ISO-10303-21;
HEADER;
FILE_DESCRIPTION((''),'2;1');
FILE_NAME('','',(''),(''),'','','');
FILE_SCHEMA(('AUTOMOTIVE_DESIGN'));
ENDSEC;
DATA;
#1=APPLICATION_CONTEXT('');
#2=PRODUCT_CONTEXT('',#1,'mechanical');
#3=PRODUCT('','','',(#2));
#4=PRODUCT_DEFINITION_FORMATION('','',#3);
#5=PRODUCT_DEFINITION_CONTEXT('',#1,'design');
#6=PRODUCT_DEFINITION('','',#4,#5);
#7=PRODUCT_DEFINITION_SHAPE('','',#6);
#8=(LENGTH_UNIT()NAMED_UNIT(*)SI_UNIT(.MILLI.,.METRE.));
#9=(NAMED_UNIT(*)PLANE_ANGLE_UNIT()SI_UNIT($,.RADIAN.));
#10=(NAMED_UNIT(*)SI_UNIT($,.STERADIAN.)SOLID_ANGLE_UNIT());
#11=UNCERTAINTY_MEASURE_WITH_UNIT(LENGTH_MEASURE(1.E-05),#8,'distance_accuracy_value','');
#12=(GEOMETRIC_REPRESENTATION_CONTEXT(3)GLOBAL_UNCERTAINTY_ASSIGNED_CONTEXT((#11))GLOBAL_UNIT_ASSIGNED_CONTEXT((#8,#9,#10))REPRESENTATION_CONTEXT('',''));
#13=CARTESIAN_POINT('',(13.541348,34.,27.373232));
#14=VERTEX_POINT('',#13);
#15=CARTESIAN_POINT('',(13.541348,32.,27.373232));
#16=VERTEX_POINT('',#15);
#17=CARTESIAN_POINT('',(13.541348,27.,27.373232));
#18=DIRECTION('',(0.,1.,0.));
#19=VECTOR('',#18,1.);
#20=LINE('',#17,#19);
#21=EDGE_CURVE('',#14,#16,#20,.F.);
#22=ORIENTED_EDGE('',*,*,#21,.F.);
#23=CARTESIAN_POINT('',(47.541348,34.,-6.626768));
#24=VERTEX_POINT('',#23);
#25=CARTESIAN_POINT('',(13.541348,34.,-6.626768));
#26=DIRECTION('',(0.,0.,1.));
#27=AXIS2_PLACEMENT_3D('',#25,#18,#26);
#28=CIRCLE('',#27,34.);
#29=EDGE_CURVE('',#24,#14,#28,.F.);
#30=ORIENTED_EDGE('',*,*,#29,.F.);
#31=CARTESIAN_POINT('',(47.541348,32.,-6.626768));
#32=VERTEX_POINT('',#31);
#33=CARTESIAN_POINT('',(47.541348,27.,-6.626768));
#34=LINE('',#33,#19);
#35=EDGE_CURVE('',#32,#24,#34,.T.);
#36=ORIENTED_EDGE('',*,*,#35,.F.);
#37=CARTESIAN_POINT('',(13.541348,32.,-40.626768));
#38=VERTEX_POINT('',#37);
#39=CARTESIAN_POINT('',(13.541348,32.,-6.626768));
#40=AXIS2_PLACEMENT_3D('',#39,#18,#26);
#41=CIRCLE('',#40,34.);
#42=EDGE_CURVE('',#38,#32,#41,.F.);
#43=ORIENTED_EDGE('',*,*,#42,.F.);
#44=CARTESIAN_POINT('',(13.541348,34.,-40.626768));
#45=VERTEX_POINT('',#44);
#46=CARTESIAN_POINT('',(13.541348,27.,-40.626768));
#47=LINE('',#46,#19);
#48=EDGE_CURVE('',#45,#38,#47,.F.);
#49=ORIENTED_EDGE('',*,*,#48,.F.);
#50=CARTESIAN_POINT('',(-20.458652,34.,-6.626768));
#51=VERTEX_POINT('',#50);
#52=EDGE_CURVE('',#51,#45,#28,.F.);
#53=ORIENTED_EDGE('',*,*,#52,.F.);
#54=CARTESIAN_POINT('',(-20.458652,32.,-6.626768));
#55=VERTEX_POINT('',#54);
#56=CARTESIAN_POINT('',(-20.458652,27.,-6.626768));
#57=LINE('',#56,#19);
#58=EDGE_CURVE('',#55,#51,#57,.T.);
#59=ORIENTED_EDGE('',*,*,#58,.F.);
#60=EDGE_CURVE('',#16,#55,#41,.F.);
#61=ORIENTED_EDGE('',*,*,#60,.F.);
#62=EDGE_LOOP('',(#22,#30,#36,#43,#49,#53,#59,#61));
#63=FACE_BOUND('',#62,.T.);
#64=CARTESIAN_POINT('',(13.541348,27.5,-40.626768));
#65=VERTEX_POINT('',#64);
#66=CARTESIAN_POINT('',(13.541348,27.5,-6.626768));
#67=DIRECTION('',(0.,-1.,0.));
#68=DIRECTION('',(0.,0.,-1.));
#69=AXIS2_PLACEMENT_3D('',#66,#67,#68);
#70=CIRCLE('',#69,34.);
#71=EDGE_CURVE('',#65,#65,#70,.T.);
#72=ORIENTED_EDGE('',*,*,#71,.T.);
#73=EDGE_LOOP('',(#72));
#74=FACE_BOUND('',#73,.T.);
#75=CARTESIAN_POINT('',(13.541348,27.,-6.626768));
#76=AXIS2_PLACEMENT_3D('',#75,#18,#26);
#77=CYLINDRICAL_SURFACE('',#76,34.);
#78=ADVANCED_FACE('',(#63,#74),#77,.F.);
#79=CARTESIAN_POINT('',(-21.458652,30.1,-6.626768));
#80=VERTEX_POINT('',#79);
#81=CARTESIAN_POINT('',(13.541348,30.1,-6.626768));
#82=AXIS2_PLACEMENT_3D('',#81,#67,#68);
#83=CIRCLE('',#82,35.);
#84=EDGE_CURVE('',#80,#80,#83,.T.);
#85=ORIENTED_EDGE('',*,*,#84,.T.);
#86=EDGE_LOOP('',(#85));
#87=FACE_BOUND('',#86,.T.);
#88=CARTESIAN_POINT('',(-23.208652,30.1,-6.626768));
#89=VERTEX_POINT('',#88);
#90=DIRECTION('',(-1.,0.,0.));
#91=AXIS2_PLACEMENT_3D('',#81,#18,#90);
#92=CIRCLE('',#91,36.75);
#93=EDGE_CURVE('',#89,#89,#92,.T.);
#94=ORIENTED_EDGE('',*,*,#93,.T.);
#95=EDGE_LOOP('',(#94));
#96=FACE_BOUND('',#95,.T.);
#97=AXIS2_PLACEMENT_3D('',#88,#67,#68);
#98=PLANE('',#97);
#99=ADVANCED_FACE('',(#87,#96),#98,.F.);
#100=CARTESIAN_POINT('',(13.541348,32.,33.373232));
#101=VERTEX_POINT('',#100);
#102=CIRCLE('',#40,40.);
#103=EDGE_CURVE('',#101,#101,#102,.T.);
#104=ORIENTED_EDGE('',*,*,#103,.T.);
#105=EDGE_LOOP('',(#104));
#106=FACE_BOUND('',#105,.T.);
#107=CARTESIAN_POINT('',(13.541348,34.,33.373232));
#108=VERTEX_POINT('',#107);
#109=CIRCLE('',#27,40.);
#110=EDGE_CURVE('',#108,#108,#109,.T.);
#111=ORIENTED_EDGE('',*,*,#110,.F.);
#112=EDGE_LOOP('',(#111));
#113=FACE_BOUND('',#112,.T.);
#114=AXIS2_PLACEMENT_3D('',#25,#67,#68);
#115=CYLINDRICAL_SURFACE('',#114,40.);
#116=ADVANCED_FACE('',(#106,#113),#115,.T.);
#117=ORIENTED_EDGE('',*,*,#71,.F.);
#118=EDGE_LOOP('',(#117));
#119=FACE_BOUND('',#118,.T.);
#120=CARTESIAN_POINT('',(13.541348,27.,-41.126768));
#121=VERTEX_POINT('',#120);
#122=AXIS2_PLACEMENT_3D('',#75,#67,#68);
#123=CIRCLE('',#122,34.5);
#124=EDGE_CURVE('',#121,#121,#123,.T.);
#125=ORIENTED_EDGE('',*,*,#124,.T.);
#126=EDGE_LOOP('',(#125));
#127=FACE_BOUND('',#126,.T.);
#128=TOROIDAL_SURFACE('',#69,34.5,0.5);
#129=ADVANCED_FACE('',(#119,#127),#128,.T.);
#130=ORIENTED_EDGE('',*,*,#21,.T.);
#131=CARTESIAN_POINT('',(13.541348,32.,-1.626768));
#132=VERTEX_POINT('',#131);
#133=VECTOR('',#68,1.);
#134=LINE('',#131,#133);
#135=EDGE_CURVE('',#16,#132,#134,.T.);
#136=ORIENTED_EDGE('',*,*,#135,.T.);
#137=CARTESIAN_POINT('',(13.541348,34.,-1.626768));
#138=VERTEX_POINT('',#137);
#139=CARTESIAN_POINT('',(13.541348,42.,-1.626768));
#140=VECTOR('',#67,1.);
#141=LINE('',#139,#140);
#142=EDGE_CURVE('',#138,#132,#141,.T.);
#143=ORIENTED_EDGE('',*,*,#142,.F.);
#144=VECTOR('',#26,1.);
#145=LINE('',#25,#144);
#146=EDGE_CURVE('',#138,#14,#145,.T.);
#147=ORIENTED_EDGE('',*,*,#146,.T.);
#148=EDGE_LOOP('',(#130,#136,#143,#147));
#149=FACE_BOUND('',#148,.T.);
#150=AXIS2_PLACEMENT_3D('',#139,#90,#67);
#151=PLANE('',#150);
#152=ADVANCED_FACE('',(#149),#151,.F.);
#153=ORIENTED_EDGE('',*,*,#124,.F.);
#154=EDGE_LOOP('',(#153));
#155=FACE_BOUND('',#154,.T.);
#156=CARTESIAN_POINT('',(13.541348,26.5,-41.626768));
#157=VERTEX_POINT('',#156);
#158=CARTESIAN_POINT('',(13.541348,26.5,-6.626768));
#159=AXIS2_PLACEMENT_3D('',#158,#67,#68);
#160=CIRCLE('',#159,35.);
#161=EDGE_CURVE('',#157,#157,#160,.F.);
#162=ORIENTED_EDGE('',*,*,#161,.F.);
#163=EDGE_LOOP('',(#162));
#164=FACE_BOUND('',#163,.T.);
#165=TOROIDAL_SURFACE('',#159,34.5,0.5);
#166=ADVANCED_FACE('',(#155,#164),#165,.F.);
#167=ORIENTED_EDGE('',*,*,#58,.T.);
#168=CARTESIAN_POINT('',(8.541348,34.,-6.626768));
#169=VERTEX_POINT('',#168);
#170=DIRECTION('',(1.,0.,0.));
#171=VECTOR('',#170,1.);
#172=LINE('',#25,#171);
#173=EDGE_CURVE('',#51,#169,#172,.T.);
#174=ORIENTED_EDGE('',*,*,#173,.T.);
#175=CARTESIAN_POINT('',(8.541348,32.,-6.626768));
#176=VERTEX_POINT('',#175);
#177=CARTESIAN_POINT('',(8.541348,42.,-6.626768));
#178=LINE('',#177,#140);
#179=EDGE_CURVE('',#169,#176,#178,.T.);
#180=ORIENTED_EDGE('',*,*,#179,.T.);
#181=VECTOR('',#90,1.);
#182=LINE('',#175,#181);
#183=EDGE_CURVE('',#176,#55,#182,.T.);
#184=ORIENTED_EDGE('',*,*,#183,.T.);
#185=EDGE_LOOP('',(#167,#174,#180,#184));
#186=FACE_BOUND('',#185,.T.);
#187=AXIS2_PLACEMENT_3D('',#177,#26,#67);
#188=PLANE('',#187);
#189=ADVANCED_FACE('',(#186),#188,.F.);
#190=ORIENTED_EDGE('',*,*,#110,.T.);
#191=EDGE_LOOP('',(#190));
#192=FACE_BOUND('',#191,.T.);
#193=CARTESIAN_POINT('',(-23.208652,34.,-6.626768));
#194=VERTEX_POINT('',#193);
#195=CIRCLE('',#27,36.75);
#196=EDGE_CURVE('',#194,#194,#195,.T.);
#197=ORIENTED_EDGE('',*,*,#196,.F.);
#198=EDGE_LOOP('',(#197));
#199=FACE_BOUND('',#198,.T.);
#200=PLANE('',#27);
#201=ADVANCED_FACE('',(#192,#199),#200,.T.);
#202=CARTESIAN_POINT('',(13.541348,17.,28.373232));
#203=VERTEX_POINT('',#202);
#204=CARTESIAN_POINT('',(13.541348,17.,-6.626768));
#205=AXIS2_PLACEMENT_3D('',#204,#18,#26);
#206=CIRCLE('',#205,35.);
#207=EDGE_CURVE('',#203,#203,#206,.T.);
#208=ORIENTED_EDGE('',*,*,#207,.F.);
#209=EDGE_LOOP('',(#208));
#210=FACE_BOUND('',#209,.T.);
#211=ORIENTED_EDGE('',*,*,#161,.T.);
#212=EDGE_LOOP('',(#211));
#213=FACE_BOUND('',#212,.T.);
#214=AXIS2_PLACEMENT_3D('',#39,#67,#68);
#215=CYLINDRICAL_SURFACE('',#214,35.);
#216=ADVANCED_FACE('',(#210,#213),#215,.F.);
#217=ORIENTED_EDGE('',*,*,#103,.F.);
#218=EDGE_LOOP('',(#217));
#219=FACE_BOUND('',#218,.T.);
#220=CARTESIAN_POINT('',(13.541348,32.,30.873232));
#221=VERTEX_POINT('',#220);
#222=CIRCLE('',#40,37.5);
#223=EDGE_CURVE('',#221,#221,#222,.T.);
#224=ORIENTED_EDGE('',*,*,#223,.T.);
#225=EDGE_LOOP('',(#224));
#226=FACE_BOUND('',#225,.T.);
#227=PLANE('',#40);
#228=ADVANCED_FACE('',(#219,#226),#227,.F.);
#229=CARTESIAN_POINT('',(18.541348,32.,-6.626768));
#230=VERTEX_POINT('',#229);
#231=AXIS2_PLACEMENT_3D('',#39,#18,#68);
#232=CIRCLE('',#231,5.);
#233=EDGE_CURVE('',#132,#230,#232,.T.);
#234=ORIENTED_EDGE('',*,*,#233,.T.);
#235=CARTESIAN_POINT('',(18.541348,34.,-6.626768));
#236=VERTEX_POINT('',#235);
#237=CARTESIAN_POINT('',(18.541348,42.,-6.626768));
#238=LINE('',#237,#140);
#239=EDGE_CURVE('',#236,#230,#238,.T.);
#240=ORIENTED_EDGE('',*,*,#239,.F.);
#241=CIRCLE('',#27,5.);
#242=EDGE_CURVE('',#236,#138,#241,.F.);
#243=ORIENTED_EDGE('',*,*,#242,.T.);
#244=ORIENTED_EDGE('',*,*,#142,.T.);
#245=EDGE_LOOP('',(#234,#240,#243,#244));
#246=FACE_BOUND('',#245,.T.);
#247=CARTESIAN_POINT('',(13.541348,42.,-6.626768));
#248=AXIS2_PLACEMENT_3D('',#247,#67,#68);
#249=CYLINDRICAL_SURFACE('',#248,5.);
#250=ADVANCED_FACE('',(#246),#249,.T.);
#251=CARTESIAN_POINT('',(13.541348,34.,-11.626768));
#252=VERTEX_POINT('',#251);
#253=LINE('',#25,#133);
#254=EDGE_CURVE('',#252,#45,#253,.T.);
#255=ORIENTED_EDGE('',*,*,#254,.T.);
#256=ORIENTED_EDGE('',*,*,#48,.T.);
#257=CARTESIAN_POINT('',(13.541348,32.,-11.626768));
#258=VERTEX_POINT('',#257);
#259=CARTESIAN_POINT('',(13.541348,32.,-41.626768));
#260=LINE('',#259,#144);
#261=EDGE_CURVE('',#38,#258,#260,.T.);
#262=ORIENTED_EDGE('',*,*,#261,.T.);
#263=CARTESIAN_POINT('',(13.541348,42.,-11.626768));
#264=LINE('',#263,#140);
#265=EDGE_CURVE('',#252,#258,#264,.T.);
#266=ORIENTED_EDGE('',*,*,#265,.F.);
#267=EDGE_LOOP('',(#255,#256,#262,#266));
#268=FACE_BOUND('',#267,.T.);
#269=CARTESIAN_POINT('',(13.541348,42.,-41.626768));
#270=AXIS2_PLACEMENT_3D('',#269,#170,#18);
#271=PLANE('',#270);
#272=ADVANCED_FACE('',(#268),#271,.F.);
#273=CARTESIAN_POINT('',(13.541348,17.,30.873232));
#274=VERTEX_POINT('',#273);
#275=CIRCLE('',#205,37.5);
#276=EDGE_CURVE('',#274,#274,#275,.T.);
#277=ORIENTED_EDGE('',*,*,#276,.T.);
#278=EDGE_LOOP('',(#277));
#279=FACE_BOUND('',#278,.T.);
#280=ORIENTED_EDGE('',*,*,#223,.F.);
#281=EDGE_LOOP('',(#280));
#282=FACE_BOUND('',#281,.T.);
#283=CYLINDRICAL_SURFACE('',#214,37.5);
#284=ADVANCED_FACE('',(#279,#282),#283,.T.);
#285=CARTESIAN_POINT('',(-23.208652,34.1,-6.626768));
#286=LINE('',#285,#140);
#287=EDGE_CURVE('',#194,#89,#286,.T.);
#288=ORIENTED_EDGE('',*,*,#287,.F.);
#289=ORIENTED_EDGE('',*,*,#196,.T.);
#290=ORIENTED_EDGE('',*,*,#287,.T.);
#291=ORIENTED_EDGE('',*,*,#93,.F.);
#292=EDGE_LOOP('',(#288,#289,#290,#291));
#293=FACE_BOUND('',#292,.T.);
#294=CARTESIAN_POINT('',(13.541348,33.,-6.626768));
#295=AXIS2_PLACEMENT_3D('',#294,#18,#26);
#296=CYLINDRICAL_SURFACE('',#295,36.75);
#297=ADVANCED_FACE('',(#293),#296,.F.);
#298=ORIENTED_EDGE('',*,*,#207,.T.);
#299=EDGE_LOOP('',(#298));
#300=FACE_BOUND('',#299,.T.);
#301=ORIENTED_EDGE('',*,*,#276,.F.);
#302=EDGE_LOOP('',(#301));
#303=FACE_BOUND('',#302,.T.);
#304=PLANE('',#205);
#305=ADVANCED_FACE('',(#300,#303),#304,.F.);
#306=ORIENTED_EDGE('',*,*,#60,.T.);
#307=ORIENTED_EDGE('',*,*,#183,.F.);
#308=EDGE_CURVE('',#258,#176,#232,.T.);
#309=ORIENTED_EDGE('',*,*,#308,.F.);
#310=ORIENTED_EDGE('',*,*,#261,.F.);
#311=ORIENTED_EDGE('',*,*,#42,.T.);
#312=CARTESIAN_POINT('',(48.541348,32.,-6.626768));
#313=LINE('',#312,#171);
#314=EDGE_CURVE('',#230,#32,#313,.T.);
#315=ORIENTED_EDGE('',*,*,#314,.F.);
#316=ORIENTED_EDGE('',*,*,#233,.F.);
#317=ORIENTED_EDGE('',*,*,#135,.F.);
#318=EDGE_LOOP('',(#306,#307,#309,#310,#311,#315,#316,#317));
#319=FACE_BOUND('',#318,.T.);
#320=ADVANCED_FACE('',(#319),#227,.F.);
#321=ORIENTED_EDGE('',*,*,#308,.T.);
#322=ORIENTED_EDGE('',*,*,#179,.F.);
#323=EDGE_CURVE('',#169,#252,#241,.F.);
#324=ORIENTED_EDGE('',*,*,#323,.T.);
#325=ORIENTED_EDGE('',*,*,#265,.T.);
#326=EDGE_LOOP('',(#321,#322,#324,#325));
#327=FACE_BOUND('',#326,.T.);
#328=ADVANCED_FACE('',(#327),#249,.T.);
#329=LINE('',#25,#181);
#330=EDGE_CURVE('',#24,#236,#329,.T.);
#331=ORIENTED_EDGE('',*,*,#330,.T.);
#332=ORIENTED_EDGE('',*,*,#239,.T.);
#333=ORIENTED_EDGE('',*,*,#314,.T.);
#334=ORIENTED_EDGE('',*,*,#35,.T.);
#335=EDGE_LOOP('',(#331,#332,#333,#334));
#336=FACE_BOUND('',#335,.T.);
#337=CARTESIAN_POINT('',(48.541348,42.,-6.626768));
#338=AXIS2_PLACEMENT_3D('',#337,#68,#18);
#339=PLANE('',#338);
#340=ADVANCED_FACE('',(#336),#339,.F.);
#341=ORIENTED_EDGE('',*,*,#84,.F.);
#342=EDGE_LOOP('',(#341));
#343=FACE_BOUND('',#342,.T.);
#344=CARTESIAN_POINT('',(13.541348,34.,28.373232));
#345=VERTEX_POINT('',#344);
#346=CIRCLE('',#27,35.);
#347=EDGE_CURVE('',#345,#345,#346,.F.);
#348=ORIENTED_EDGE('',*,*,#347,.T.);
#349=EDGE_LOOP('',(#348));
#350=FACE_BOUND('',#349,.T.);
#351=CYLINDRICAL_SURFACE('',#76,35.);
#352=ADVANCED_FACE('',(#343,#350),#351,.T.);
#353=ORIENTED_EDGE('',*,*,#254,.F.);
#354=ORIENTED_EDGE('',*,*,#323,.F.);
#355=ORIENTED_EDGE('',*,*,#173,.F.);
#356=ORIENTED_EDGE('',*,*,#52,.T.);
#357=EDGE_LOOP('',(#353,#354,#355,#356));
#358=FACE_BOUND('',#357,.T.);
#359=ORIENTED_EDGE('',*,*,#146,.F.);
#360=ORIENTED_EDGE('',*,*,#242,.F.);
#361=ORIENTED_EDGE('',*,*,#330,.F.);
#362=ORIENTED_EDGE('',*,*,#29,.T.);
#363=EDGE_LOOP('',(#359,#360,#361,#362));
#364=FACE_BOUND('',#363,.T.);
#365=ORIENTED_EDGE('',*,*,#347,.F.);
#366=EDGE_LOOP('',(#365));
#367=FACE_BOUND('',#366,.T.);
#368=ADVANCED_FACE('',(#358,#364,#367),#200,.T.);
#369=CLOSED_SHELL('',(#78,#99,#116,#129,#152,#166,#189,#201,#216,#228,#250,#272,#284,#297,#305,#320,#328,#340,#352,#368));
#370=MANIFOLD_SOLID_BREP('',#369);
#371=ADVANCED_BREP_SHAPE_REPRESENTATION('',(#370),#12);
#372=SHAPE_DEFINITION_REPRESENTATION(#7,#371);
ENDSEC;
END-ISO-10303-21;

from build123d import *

# Parameters (mm, degrees)
CROQUIS1_R              = 37.5
CROQUIS1_R_2            = 35
SALIENTE_EXTRUIR1_DEPTH = 15
CROQUIS2_R              = 40
SALIENTE_EXTRUIR2_DEPTH = 2
CORTAR_EXTRUIR1_DEPTH   = 10
CROQUIS5_W              = 2
CROQUIS5_H              = 4
SALIENTE_EXTRUIR3_START = -2
CROQUIS8_R              = 35
CROQUIS8_R_2            = 34
SALIENTE_EXTRUIR3_DEPTH = 7
REDONDEO1_R             = 0.5


with BuildPart() as part:
    # Croquis1 → Saliente-Extruir1 (new body)
    with BuildSketch(Plane(origin=(0, 17, 0), x_dir=(1, 0, 0), z_dir=(0, 1, 0))):
        with Locations(Location((13.541348433, 6.626768313, 0), (0, 0, 270))):
            Circle(CROQUIS1_R)
        with Locations(Location((13.541348433, 6.626768313, 0), (0, 0, 270))):
            Circle(CROQUIS1_R_2, mode=Mode.SUBTRACT)
    extrude(amount=SALIENTE_EXTRUIR1_DEPTH)

    # Croquis2 → Saliente-Extruir2 (add)
    with BuildSketch(Plane(origin=(0, 32, 0), x_dir=(1, 0, 0), z_dir=(0, 1, 0))):
        with Locations(Location((13.541348433, 6.626768313, 0), (0, 0, 270))):
            Circle(CROQUIS2_R)
    extrude(amount=SALIENTE_EXTRUIR2_DEPTH)

    # Croquis7 → Cortar-Extruir1 (cut)
    with BuildSketch(Plane.XZ.offset(-32)):
        with BuildLine():
            Line((13.541348433, -41.626768313), (13.541348433, -11.626768313))
            ThreePointArc((13.541348433, -11.626768313), (10.005814527, -10.162302219), (8.541348433, -6.626768313))
            Line((8.541348433, -6.626768313), (-21.458651567, -6.626768313))
            ThreePointArc((-21.458651567, -6.626768313), (-11.207388908, -31.375505654), (13.541348433, -41.626768313))
        make_face()
        with BuildLine():
            Line((48.541348433, -6.626768313), (18.541348433, -6.626768313))
            ThreePointArc((18.541348433, -6.626768313), (17.076882339, -3.091234407), (13.541348433, -1.626768313))
            Line((13.541348433, -1.626768313), (13.541348433, 28.373231687))
            ThreePointArc((13.541348433, 28.373231687), (38.290085775, 18.121969029), (48.541348433, -6.626768313))
        make_face()
    extrude(amount=-CORTAR_EXTRUIR1_DEPTH, mode=Mode.SUBTRACT)

    # Cortar-Barrer1: sweep along a path in Croquis6
    with BuildLine(Plane(origin=(0, 33, 0), x_dir=(1, 0, 0), z_dir=(0, 1, 0))) as cortar_barrer1_path:
        CenterArc((13.541348433, 6.626768313), 36.25, 0, 360)
    # Croquis5 → Cortar-Barrer1 (sweep, cut)
    with BuildSketch(Plane.XY.offset(-6.626768313)):
        with Locations((-22.208651567, 32.1)):
            Rectangle(CROQUIS5_W, CROQUIS5_H)
    sweep(path=cortar_barrer1_path.line, mode=Mode.SUBTRACT)


with BuildPart() as cortar_barrer1_piece_1:
    # of the separate pieces the step leaves, piece 1, a body of its own (cortar_barrer1_pieces)
    add(part.part.solids().sort_by_distance((13.541348433, 32, 33.373231687))[0])



with BuildPart() as cortar_barrer1_piece_2:
    # of the separate pieces the step leaves, piece 2, a body of its own (cortar_barrer1_pieces)
    add(part.part.solids().sort_by_distance((18.541348433, 34, -6.626768313))[0])


with BuildPart() as cortar_barrer1_piece_1_1:
    add(cortar_barrer1_piece_1.part)

    add(cortar_barrer1_piece_2.part)  # Saliente-Extruir3 merges Cortar-Barrer1 piece 2
    # Croquis8 → Saliente-Extruir3 (add)
    with BuildSketch(Plane.XZ.offset(-32).offset(SALIENTE_EXTRUIR3_START)):
        with Locations(Location((13.541348433, -6.626768313, 0), (0, 0, 90))):
            Circle(CROQUIS8_R)
        with Locations(Location((13.541348433, -6.626768313, 0), (0, 0, 270))):
            Circle(CROQUIS8_R_2, mode=Mode.SUBTRACT)
    extrude(amount=SALIENTE_EXTRUIR3_DEPTH)

    # Redondeo1
    redondeo1_edges = [cortar_barrer1_piece_1_1.edges().sort_by_distance(p)[0] for p in [
        (13.541348433, 27, 27.373231687),
        (13.541348433, 27, -41.626768313),
    ]]
    fillet(redondeo1_edges, radius=REDONDEO1_R - 0.0001)  # a hair under: the kernel refuses the full size


solid = cortar_barrer1_piece_1_1.part
